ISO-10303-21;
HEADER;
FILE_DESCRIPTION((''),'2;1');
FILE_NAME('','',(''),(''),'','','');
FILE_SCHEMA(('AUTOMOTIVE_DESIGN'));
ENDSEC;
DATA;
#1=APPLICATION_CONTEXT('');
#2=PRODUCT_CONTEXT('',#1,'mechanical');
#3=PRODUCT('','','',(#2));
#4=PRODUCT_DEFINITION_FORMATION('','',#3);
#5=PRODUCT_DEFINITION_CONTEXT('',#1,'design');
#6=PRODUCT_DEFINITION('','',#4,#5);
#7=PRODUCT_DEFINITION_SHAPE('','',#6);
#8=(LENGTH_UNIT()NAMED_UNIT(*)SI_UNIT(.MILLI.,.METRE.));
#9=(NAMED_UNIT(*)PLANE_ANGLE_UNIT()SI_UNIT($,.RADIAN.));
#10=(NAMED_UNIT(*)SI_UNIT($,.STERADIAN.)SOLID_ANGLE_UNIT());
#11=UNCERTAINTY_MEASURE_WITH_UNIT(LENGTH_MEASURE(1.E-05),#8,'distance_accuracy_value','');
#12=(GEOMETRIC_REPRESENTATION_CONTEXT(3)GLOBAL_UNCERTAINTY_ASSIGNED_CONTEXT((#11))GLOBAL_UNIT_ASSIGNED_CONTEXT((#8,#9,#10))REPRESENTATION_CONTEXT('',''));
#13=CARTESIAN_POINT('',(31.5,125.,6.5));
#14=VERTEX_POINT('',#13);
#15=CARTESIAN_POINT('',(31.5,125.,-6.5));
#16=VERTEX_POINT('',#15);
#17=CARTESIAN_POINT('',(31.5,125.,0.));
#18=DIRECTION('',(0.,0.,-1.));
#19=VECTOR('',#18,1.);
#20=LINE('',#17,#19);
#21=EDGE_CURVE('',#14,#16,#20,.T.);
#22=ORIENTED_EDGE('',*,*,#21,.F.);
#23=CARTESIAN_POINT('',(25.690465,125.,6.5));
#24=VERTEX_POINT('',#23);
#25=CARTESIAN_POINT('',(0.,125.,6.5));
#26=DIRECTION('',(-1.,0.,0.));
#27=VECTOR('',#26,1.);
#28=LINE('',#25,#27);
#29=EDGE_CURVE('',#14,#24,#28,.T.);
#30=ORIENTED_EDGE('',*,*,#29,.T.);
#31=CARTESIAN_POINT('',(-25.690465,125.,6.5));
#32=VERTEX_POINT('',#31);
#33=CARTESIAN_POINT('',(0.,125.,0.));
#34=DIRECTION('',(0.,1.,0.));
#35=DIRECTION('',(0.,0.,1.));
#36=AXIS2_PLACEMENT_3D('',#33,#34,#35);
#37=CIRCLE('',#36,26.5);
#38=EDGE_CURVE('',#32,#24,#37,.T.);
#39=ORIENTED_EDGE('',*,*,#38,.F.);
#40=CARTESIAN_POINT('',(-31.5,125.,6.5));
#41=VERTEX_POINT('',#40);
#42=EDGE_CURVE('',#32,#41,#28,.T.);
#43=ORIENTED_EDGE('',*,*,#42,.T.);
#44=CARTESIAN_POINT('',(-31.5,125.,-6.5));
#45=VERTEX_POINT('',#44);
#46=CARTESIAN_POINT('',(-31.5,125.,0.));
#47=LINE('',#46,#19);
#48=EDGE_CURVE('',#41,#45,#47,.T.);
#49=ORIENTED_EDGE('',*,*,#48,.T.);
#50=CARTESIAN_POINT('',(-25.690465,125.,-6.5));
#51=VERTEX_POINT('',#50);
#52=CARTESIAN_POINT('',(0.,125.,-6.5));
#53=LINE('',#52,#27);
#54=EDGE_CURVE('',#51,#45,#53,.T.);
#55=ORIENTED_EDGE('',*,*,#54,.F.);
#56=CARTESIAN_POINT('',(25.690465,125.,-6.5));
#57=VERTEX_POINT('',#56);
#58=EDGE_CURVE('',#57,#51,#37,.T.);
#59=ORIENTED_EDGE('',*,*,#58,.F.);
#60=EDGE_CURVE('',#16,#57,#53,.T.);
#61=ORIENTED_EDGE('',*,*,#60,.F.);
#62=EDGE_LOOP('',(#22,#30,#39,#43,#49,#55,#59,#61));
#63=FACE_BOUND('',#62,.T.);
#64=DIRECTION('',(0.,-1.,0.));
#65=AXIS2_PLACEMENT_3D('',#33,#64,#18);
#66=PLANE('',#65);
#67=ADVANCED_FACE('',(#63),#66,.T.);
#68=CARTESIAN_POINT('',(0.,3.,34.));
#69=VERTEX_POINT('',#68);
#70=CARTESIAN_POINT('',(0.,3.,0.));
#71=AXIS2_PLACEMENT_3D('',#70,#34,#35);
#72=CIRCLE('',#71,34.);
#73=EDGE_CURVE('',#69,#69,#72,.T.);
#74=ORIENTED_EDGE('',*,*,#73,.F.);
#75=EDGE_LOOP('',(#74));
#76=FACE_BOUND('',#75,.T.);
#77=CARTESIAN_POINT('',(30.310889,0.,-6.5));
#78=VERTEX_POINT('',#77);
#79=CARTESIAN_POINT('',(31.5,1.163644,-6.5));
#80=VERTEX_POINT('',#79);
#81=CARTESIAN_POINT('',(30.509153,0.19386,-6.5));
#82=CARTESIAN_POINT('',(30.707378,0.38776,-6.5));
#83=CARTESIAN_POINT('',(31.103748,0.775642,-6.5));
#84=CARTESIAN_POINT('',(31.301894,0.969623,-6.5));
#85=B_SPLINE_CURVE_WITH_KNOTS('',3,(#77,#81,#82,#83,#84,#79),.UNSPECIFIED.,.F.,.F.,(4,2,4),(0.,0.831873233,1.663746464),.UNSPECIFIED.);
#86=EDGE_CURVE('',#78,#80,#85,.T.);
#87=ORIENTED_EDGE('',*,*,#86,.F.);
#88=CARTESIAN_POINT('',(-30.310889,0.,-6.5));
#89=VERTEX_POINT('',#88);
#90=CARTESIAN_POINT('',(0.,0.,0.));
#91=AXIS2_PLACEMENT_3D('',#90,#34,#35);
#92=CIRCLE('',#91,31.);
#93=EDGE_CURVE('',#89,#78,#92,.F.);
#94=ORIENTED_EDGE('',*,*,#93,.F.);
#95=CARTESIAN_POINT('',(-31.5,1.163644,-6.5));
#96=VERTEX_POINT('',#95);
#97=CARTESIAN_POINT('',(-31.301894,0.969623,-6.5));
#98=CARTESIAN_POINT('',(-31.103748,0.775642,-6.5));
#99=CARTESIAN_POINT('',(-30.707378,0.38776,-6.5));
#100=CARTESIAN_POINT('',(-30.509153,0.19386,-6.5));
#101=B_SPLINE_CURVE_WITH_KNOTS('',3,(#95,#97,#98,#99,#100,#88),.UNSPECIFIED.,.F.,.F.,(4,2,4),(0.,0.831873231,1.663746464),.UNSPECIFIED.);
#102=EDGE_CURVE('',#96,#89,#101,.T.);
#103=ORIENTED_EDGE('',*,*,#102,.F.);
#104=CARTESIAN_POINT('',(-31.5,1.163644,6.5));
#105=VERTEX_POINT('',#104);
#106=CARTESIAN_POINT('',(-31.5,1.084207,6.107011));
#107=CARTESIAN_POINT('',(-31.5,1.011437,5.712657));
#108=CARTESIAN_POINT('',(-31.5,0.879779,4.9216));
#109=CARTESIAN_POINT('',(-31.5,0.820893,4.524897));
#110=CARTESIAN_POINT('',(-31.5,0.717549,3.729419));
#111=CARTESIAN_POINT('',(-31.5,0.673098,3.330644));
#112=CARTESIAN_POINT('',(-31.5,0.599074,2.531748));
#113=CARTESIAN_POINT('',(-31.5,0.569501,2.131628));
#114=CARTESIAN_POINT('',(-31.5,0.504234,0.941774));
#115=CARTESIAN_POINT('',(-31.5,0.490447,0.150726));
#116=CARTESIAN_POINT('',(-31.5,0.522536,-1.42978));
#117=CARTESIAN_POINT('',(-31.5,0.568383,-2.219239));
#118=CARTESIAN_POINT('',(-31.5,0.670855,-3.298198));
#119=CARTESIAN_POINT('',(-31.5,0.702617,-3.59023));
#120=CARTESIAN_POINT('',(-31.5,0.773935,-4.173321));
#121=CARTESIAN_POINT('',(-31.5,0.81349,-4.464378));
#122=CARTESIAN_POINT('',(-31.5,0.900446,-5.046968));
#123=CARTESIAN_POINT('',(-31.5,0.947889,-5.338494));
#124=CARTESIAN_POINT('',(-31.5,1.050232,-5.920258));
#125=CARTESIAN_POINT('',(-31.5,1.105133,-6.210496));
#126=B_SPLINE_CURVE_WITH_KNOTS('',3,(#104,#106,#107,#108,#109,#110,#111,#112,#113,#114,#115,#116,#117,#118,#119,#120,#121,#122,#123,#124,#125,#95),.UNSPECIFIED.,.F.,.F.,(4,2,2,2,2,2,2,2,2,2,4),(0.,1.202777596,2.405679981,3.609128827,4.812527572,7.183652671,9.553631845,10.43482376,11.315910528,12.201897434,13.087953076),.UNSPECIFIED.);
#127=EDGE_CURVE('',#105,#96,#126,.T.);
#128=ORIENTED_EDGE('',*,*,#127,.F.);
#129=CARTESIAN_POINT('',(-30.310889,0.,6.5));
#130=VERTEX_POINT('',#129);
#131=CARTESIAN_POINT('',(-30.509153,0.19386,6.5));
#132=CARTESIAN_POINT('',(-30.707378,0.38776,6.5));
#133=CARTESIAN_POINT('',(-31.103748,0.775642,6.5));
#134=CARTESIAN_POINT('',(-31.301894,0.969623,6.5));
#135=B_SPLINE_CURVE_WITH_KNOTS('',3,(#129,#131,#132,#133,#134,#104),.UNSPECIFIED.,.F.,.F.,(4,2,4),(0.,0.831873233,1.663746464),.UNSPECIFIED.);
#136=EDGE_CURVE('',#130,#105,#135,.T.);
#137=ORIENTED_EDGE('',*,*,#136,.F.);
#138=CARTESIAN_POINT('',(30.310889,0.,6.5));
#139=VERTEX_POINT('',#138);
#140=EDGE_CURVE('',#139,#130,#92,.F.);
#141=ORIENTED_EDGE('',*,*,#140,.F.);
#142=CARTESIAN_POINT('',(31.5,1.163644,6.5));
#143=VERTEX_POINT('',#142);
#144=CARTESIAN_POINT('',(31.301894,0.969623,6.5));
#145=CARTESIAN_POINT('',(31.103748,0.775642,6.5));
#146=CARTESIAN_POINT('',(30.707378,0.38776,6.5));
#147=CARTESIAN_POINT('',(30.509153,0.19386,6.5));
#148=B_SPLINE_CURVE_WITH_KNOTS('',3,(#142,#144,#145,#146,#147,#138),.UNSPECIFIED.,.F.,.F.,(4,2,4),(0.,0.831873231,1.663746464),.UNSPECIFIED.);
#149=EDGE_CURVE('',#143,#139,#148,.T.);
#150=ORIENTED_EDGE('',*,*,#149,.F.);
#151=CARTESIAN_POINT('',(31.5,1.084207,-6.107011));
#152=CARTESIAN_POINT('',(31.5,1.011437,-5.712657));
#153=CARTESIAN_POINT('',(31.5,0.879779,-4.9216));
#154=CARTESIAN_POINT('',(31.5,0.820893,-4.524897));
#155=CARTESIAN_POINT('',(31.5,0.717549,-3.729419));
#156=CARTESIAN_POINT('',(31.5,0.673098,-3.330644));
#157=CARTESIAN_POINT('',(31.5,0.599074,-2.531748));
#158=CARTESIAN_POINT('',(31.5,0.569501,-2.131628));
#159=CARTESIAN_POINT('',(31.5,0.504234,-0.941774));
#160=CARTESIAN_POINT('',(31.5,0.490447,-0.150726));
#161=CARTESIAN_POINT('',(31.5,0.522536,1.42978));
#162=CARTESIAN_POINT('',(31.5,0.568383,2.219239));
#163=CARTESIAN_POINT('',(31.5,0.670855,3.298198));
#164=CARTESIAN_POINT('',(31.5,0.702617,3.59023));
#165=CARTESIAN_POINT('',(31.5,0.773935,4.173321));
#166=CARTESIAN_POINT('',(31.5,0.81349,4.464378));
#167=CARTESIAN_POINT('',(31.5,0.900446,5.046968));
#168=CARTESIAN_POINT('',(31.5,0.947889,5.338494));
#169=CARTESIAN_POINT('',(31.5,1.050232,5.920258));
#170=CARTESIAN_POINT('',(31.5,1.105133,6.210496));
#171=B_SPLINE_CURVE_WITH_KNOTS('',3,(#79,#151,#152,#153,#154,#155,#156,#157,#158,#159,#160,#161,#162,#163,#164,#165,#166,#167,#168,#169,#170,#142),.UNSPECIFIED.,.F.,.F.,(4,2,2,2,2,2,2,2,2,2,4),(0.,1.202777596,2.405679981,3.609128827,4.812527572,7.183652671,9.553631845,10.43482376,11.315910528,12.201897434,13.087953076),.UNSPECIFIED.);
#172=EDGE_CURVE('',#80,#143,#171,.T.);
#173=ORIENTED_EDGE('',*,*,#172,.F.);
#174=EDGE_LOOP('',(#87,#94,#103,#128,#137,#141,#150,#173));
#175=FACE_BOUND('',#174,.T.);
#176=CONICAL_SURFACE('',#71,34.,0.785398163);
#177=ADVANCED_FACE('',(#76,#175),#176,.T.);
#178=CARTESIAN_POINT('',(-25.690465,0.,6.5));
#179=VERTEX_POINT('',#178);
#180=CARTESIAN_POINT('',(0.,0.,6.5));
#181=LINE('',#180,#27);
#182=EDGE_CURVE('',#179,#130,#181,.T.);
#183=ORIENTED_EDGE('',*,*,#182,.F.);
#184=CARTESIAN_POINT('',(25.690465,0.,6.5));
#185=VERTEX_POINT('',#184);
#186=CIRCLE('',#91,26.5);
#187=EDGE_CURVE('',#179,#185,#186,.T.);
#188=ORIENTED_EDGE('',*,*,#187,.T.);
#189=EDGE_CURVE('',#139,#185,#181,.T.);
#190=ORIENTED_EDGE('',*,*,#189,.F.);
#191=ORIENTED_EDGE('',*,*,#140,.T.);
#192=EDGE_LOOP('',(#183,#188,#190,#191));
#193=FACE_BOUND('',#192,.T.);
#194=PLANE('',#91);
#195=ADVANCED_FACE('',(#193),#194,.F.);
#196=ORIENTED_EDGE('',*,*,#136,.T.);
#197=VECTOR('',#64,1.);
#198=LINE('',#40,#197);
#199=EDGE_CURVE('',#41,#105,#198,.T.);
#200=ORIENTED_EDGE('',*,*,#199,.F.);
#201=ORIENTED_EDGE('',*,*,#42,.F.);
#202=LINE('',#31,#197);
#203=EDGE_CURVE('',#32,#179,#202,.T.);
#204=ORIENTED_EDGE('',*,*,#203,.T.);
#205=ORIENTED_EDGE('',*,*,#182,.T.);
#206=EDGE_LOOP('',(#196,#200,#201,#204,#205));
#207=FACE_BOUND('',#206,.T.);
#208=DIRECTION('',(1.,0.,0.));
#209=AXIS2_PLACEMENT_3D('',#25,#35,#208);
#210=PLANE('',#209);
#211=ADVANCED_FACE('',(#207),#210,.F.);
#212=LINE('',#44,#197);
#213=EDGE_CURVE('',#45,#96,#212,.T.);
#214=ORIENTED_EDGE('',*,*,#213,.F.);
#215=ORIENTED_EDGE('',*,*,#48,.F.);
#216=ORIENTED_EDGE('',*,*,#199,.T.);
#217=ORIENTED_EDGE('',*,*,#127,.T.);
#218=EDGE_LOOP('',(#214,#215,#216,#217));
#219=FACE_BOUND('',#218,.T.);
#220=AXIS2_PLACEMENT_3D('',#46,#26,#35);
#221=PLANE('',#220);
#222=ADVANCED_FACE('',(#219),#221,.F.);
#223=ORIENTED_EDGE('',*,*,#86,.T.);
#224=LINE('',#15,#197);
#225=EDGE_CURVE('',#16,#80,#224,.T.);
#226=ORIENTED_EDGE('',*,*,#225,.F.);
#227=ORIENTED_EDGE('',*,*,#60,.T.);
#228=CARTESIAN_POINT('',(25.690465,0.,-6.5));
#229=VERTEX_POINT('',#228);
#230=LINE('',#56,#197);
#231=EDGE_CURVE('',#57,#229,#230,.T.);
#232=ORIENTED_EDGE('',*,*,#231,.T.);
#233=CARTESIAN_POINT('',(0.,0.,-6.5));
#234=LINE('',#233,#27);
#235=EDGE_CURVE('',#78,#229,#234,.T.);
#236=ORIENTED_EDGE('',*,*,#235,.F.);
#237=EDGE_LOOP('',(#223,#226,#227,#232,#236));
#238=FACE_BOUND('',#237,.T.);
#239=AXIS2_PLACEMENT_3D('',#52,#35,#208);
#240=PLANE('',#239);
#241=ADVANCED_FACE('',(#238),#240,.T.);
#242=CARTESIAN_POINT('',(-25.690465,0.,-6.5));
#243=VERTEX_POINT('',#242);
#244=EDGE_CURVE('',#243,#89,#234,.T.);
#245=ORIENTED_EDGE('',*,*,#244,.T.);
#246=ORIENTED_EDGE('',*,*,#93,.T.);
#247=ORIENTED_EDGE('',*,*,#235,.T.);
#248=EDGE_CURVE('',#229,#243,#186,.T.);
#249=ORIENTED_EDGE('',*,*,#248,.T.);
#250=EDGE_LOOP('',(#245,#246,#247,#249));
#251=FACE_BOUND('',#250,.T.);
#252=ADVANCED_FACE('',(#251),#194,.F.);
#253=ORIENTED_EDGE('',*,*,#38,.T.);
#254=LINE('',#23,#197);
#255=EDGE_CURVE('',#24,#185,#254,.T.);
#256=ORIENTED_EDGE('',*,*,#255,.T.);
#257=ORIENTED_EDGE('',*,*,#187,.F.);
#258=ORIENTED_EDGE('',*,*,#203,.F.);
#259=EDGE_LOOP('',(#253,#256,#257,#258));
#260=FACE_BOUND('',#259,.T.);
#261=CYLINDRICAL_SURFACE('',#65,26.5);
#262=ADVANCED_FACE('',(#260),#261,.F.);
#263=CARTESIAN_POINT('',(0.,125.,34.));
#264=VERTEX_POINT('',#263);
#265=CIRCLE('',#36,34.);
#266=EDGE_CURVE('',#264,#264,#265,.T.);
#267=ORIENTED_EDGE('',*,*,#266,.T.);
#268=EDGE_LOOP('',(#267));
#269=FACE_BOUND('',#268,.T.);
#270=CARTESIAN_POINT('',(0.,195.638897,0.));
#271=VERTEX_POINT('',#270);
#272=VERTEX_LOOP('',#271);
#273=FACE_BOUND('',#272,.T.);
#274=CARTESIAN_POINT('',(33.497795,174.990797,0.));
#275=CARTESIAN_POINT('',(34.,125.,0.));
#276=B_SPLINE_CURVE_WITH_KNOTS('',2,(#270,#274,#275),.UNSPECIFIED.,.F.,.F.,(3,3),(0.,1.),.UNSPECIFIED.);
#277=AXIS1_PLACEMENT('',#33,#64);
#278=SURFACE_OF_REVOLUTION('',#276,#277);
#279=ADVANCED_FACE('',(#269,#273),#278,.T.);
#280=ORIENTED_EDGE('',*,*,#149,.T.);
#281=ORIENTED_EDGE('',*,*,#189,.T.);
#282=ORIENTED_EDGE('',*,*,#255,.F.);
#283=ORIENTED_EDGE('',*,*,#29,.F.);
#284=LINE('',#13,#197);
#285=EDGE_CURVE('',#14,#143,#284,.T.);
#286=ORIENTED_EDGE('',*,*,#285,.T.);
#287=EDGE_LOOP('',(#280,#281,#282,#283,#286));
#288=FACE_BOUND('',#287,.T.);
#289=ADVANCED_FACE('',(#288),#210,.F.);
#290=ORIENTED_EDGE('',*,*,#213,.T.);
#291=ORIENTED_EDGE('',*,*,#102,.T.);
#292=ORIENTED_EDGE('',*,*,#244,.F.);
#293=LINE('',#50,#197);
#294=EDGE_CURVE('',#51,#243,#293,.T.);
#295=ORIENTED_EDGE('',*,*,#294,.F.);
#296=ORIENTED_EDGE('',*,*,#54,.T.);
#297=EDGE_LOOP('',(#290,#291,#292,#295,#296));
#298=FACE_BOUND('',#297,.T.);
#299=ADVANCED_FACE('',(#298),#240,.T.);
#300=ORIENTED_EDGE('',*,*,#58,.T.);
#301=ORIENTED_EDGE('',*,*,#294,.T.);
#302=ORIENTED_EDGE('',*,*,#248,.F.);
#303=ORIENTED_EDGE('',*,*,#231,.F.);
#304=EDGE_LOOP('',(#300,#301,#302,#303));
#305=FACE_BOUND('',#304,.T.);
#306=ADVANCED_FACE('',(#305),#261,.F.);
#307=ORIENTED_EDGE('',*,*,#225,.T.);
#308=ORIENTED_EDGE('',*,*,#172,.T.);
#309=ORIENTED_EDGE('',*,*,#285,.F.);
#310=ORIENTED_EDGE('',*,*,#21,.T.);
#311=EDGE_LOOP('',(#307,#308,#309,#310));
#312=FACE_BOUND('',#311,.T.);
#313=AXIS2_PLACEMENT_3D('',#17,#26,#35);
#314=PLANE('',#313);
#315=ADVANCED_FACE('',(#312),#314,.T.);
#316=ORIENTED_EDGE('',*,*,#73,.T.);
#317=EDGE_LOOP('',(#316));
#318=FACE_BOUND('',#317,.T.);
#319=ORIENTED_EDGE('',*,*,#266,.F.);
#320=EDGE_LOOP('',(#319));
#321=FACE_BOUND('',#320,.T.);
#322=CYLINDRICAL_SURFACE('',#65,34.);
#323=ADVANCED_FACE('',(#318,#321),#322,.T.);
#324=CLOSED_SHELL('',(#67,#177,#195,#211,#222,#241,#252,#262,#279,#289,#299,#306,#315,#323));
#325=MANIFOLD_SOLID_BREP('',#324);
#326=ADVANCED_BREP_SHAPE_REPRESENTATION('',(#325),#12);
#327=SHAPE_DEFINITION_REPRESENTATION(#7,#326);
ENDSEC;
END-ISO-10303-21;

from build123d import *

# Parameters (mm, degrees)
SKETCH1_R           = 34
BOSS_EXTRUDE1_DEPTH = 125
CHAMFER1_SIZE       = 3


with BuildPart() as part:
    # Sketch1 → Boss-Extrude1 (new body)
    with BuildSketch(Plane(origin=(0, 0, 0), x_dir=(1, 0, 0), z_dir=(0, 1, 0))):
        with Locations(Location((0, 0, 0), (0, 0, 270))):
            Circle(SKETCH1_R)
        with BuildLine():
            Line((31.5, 6.5), (31.5, -6.5))
            Line((31.5, -6.5), (25.690465157, -6.5))
            ThreePointArc((25.690465157, -6.5), (0, -26.5), (-25.690465157, -6.5))
            Line((-25.690465157, -6.5), (-31.5, -6.5))
            Line((-31.5, -6.5), (-31.5, 6.5))
            Line((-31.5, 6.5), (-25.690465157, 6.5))
            ThreePointArc((-25.690465157, 6.5), (0, 26.5), (25.690465157, 6.5))
            Line((25.690465157, 6.5), (31.5, 6.5))
        make_face(mode=Mode.SUBTRACT)
    extrude(amount=BOSS_EXTRUDE1_DEPTH)

    # Sketch2 → Revolve1 (revolve)
    with BuildSketch(Plane.XY):
        with BuildLine():
            Line((0, 125), (0, 195.638896549))
            add(Edge.make_bspline(
                [(0, 195.638896549), (33.497794894, 174.990797279), (34, 125)],
                knots=[0, 0, 0, 1, 1, 1], degree=2))
            Line((34, 125), (0, 125))
        make_face()
    revolve(axis=Axis((0, 125, 0), (0, 1, 0)))

    # Chamfer1
    # the kernel refuses this chamfer: 3 mm, written as the material it takes off along each edge
    with BuildSketch(Plane(origin=(0, 0, 0), x_dir=(0, 0, 1), z_dir=(-1, 0, 0))) as chamfer1_piece_1:
        Polygon((34, CHAMFER1_SIZE), (34 - CHAMFER1_SIZE, 0), (34, 0), align=None)
    revolve(axis=Axis((0, 0, 0), (0, 1, 0)), mode=Mode.SUBTRACT)


solid = part.part
